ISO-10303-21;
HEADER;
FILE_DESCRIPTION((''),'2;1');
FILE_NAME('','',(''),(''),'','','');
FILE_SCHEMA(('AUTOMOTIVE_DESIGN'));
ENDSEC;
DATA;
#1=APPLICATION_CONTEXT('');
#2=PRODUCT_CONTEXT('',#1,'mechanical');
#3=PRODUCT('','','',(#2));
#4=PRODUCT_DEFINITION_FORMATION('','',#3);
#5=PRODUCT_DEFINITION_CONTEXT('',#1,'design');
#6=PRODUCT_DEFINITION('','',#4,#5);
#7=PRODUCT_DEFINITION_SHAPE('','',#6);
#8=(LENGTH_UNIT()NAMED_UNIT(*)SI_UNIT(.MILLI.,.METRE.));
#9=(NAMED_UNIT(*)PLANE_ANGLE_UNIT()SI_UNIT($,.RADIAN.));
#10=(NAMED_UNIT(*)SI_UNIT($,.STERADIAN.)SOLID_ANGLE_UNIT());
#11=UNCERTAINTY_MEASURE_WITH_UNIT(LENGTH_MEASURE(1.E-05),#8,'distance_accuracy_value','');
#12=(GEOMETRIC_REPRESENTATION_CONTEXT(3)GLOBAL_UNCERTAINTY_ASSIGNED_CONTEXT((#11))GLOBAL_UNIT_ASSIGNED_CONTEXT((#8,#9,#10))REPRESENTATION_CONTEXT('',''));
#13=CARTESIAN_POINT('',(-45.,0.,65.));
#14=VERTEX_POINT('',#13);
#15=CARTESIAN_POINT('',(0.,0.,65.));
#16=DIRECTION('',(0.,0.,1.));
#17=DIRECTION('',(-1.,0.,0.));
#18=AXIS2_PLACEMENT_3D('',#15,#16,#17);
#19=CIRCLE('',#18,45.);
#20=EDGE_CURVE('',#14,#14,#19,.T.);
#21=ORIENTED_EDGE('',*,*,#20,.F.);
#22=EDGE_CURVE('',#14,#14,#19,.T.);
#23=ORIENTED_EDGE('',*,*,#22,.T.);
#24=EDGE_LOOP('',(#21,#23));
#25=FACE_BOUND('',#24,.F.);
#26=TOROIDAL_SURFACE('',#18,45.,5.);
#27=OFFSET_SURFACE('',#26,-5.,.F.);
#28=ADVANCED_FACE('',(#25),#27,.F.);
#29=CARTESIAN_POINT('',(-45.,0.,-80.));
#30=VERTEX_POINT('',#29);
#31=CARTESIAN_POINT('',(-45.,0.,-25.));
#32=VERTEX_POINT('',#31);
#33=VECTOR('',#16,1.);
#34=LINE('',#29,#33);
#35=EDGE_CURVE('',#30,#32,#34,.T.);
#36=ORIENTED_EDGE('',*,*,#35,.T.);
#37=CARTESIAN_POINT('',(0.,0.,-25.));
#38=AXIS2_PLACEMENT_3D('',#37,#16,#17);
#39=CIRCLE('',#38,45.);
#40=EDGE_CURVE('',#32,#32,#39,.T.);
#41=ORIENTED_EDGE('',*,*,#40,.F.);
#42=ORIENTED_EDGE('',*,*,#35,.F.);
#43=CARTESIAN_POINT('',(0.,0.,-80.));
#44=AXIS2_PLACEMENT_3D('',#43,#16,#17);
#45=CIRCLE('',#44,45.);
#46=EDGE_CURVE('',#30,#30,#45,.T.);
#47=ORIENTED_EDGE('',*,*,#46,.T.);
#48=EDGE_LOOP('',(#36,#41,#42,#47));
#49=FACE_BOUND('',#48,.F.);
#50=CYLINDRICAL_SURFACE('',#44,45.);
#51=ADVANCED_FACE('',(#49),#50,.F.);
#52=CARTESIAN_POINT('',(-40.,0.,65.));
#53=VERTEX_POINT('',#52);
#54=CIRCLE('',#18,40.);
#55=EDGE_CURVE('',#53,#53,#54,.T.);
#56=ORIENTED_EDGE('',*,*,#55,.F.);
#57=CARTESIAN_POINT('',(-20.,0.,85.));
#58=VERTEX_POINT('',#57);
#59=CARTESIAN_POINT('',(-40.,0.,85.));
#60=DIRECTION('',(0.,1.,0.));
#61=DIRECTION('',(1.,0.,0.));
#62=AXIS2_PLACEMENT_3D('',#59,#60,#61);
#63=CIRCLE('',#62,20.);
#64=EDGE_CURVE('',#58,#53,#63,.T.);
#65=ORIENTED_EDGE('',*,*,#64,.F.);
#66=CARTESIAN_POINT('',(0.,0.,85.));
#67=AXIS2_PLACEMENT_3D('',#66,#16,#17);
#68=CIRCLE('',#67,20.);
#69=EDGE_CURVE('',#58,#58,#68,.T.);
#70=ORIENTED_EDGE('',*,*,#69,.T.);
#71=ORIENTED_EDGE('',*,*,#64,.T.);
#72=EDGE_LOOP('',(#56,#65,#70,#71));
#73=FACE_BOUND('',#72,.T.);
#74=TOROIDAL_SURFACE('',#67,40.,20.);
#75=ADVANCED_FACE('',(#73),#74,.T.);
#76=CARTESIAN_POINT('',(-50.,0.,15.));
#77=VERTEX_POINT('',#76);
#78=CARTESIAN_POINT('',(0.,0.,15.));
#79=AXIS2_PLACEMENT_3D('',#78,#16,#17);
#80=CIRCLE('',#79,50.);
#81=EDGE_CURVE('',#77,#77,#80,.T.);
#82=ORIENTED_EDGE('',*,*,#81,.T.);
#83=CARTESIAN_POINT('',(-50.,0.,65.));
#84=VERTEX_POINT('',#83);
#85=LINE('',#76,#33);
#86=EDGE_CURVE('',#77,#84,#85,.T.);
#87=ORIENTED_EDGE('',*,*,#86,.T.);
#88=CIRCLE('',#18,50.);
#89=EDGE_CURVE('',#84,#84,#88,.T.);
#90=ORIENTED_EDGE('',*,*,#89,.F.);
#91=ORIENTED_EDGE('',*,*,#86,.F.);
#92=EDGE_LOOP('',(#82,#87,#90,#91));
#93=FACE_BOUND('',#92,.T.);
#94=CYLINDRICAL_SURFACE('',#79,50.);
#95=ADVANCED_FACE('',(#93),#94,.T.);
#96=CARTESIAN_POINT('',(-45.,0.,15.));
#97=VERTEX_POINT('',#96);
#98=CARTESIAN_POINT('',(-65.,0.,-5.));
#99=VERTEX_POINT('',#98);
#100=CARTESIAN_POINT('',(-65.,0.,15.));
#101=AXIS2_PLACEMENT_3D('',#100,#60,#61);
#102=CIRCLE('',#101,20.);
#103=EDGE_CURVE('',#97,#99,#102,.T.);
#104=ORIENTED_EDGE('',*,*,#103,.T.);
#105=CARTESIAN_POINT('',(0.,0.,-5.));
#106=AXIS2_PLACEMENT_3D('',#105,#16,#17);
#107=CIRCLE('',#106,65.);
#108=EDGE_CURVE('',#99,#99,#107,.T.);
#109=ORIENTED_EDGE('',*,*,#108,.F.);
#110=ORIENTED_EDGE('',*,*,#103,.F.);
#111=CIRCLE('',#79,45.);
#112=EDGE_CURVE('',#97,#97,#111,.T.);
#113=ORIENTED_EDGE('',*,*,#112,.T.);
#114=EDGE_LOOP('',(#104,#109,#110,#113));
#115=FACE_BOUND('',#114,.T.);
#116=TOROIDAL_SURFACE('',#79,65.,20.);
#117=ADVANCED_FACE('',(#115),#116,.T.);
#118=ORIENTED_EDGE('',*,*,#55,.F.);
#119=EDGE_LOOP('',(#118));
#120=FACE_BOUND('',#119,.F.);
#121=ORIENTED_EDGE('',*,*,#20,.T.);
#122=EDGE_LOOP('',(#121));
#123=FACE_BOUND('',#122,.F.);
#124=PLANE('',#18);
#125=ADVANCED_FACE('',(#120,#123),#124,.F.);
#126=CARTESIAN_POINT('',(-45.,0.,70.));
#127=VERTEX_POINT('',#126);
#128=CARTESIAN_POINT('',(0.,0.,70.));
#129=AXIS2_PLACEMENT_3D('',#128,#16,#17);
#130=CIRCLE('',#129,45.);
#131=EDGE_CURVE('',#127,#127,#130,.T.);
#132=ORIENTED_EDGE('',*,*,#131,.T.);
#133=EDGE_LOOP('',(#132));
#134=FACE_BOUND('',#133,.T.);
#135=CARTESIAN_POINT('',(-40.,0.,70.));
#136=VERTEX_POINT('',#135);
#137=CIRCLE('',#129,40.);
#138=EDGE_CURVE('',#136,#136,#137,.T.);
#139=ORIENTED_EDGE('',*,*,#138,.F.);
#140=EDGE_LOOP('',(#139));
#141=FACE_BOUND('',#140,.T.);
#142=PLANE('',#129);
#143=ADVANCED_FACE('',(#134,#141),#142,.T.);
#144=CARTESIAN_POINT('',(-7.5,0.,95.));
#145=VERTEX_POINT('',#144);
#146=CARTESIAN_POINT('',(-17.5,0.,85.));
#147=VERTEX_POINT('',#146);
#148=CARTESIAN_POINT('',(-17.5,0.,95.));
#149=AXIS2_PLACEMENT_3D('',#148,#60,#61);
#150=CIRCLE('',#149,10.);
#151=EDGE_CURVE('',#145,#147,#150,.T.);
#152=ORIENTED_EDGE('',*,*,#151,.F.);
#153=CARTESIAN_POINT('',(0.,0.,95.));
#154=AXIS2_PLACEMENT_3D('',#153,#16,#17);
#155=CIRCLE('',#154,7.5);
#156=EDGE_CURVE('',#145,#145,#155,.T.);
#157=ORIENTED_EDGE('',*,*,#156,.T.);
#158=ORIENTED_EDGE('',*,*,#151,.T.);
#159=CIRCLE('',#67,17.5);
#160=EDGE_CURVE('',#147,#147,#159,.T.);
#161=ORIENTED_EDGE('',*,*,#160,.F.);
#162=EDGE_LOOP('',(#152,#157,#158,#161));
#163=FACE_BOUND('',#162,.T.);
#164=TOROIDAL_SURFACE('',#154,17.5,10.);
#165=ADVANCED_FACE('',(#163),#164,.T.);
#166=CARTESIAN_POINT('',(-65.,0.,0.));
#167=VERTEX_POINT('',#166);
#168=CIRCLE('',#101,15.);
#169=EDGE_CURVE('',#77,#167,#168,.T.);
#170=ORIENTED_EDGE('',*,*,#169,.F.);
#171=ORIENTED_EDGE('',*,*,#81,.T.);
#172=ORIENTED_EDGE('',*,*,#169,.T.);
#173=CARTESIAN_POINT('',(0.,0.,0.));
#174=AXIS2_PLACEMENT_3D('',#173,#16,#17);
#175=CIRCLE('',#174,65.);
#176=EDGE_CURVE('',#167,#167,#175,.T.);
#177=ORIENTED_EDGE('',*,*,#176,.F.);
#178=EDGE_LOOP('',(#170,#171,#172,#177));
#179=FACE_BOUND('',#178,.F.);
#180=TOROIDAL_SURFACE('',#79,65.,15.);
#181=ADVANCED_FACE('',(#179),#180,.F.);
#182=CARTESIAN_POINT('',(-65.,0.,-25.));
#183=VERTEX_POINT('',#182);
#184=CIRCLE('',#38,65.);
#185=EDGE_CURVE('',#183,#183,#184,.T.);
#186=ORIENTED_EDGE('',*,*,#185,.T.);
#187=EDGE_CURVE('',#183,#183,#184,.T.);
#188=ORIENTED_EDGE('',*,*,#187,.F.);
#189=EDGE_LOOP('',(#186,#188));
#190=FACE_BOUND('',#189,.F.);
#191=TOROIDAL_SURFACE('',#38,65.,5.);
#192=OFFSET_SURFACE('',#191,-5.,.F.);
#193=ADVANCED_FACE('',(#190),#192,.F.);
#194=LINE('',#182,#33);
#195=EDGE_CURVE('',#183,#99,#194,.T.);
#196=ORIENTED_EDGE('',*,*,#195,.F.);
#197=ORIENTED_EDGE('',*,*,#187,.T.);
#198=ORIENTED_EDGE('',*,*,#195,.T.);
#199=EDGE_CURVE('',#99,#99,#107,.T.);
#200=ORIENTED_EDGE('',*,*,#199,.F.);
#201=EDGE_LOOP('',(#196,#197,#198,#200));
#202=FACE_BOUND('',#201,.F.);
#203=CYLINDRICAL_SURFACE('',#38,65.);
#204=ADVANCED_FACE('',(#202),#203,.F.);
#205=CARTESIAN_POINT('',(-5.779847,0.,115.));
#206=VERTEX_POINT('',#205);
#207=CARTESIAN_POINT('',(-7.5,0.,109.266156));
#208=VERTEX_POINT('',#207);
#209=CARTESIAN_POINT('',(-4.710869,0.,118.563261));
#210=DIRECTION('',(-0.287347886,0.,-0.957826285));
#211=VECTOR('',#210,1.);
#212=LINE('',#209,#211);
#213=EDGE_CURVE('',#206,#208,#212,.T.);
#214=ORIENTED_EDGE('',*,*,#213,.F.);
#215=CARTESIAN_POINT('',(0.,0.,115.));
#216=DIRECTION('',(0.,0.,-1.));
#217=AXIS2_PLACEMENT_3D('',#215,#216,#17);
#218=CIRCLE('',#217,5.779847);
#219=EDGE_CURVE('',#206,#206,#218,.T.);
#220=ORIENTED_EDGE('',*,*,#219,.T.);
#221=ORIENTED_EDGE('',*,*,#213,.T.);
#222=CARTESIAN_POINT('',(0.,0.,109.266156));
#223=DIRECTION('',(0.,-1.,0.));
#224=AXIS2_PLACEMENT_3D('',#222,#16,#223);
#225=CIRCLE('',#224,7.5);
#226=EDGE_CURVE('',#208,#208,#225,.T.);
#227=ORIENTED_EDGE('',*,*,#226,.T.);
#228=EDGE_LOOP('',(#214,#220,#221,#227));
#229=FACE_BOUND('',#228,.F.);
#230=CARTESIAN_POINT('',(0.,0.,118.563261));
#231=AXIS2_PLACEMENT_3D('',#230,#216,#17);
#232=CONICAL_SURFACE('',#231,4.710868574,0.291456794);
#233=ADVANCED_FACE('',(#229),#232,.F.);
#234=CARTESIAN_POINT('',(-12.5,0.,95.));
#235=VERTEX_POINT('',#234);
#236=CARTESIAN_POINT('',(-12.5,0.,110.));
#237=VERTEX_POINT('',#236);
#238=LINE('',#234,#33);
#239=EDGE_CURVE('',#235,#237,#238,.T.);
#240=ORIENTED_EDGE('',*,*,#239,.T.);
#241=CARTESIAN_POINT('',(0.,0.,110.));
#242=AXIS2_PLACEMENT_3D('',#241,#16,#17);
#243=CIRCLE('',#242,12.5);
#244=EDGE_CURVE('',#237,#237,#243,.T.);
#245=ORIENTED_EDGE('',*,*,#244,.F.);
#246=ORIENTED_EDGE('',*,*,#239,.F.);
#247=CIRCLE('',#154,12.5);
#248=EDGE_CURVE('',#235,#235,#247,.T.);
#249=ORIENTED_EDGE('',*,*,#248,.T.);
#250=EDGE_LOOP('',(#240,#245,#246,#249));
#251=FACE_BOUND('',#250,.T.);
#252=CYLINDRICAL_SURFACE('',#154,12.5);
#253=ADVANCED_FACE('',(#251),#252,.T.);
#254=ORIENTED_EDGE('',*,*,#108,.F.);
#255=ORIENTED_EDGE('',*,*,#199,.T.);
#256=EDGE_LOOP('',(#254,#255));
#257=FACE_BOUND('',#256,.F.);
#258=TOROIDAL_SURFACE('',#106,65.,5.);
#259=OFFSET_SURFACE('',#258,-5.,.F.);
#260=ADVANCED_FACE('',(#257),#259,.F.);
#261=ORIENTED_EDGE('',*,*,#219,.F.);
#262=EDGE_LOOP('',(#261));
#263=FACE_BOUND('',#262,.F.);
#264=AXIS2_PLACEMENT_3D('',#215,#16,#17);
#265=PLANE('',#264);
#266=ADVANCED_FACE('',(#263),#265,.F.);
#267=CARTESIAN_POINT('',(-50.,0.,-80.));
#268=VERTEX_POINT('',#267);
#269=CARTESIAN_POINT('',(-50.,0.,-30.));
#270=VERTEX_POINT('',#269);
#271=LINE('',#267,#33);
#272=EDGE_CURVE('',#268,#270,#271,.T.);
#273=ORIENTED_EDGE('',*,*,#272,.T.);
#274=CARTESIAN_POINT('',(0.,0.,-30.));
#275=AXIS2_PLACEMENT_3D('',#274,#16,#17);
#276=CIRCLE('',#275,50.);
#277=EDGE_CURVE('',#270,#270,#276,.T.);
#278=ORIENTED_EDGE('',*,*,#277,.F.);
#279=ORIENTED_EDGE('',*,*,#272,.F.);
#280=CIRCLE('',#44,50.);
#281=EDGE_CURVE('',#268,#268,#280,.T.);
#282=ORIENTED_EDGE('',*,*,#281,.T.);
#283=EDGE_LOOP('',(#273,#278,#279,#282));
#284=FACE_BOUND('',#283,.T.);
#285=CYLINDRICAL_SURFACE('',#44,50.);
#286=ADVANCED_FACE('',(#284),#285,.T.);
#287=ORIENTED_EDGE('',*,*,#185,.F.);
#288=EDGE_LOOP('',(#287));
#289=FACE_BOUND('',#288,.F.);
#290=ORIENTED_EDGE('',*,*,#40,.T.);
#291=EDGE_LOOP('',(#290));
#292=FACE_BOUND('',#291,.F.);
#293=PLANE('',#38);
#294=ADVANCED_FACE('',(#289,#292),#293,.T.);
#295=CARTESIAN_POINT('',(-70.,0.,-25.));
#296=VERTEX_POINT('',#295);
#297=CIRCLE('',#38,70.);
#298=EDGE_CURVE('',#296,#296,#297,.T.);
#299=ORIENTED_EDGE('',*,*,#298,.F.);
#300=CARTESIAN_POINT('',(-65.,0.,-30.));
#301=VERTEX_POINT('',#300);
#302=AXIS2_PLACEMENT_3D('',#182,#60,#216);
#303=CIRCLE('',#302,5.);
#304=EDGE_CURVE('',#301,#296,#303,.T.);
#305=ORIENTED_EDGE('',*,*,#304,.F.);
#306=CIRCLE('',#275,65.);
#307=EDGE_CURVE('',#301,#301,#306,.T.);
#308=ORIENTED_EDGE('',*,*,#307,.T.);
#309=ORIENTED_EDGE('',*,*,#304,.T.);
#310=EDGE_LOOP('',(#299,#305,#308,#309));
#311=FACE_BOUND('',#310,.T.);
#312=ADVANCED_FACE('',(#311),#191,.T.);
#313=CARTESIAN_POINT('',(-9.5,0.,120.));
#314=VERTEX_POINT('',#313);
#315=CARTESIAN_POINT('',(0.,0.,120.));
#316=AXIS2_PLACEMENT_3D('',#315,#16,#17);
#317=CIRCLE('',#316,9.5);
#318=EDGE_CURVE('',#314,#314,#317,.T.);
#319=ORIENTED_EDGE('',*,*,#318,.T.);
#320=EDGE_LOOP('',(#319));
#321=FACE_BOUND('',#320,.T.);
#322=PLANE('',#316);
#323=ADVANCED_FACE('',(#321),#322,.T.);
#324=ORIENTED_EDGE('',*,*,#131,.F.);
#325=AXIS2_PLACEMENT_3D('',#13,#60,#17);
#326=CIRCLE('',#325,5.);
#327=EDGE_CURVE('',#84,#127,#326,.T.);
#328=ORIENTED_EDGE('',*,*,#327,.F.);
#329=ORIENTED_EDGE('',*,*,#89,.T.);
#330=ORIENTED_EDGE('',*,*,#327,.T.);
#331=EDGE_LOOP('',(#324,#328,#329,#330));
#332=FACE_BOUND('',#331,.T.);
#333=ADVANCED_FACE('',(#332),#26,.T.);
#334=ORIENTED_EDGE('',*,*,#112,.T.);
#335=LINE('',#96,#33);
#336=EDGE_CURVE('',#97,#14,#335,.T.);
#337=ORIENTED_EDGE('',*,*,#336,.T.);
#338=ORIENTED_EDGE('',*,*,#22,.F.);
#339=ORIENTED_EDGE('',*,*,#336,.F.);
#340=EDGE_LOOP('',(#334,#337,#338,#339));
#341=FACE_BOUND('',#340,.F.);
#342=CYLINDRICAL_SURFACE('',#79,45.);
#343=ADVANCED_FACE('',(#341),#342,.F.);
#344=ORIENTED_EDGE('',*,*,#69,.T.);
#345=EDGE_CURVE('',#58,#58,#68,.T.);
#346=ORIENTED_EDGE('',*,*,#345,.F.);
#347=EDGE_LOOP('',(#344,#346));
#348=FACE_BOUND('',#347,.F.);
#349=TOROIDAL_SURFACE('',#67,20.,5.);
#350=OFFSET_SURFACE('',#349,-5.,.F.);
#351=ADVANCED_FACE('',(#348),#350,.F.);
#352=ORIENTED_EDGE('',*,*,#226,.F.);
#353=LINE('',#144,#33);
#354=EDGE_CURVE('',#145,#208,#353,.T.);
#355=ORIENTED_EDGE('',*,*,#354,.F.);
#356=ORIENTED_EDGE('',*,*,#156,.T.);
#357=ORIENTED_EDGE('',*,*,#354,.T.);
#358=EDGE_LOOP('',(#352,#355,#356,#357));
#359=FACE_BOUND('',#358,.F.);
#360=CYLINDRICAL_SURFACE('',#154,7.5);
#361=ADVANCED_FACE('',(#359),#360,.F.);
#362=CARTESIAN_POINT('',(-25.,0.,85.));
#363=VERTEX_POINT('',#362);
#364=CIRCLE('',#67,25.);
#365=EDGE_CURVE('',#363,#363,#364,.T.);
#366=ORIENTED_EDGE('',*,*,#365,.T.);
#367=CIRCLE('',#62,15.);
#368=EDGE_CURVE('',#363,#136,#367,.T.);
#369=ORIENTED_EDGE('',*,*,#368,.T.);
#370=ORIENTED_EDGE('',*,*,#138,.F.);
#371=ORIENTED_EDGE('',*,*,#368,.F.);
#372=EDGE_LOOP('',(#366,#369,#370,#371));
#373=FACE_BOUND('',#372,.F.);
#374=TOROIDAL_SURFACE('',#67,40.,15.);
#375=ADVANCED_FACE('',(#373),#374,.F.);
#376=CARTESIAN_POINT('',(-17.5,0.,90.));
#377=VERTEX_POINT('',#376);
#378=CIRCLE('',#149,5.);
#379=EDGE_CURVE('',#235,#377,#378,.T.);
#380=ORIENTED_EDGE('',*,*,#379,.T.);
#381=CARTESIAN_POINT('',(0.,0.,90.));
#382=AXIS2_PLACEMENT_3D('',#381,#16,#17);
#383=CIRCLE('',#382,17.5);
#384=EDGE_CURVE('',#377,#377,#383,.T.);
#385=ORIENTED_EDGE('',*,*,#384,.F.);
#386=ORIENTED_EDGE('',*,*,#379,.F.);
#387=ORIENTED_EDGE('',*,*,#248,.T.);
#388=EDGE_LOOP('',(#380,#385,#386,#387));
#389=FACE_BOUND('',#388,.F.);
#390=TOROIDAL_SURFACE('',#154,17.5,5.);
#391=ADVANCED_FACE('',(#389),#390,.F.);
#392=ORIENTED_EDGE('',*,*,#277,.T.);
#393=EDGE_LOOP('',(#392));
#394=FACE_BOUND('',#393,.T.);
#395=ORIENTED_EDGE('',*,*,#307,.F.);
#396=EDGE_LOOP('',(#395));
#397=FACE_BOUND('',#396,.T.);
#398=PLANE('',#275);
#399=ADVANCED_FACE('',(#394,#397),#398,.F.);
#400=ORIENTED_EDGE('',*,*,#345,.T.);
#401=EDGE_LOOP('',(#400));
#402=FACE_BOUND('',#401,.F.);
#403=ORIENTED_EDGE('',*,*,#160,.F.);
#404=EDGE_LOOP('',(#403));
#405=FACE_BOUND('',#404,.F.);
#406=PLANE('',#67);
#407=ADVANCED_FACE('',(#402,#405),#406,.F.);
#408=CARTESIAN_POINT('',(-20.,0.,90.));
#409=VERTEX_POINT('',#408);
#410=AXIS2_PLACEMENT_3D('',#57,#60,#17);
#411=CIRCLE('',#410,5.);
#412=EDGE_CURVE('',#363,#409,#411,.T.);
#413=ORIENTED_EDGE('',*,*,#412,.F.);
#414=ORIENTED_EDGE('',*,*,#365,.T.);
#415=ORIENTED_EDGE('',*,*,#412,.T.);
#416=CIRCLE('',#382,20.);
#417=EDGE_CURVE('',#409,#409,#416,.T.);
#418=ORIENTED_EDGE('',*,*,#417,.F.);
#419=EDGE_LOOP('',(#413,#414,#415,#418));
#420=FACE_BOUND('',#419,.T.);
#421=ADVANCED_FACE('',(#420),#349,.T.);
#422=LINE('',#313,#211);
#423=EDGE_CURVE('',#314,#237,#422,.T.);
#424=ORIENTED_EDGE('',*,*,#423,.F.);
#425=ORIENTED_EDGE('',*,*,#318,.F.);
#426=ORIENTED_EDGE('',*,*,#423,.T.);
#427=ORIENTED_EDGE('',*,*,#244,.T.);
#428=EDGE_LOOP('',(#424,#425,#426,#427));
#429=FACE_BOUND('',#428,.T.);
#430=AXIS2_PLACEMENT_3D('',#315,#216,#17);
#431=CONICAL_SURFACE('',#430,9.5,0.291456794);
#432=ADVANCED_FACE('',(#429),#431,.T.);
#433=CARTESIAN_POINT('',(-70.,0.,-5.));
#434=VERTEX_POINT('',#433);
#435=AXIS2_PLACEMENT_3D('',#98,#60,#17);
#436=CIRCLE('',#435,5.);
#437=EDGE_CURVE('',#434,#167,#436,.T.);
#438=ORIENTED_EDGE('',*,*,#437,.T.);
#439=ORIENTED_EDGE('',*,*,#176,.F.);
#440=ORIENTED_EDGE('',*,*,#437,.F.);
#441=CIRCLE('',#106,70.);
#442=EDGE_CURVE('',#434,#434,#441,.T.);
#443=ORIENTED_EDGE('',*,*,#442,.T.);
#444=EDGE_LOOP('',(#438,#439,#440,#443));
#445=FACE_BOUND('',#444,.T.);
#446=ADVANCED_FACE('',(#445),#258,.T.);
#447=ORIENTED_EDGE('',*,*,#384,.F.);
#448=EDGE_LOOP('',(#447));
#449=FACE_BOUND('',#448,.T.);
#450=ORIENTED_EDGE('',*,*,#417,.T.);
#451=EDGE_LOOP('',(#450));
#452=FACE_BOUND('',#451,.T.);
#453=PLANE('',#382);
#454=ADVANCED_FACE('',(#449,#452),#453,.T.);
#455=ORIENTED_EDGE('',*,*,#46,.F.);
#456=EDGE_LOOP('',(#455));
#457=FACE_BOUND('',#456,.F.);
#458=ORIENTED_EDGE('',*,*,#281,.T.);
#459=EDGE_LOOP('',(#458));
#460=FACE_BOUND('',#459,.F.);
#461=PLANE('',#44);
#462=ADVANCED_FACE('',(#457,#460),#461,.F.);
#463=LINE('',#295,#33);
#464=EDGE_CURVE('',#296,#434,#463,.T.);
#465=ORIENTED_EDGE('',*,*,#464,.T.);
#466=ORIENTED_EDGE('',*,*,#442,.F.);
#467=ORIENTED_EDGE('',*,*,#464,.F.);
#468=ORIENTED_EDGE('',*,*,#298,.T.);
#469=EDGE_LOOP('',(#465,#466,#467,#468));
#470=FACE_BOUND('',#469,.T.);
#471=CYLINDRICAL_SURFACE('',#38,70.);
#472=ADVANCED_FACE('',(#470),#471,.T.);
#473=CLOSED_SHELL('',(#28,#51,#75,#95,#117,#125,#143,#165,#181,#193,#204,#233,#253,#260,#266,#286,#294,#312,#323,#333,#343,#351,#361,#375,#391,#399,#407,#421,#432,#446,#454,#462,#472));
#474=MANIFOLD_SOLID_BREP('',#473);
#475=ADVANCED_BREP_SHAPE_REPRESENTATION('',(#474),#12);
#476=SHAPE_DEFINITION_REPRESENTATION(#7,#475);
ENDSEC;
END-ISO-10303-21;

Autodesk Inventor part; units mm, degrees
ref_plane "YZ Plane" through (0, 0, 0) normal (1, 0, 0) x (0, 1, 0)
ref_plane "XZ Plane" through (0, 0, 0) normal (0, 1, 0) x (-1, 0, 0)
ref_plane "XY Plane" through (0, 0, 0) normal (0, 0, 1) x (1, 0, 0)
sketch "Sketch1" plane through (0, 0, 0) normal (0, 1, 0) x (-1, 0, 0)
  line L0 (50, 0) -> (50, 0) construction
  line L1 (0, -120) -> (0, 160) projected
  line L2 (50, -80) -> (0, -80)
  line L3 (50, -80) -> (50, -30)
  line L4 (50, -30) -> (65, -30)
  line L5 (70, -25) -> (70, -5)
  line L6 (65, 0) -> (65, 0)
  line L7 (50, 15) -> (50, 65)
  line L8 (45, 70) -> (40, 70)
  line L9 (25, 85) -> (25, 85)
  line L10 (20, 90) -> (17.5, 90)
  line L11 (12.5, 95) -> (12.5, 110)
  line L12 (9.5, 120) -> (0, 120)
  arc A0 (25, 85) -> (40, 70) centre (40, 85) ccw
  arc A1 (25, 85) -> (20, 90) centre (20, 85) ccw
  arc A2 (12.5, 95) -> (17.5, 90) centre (17.5, 95) ccw
  line L13 (9.5, 120) -> (12.5, 110)
  arc A3 (50, 65) -> (45, 70) centre (45, 65) ccw
  arc A4 (50, 15) -> (65, 0) centre (65, 15) ccw
  arc A5 (65, -30) -> (70, -25) centre (65, -25) ccw
  arc A6 (70, -5) -> (65, 0) centre (65, -5) ccw
  point P0 (0, 0)
  point P1 (35, 0)
  point P2 (70, -30)
  point P3 (70, 0)
  point P4 (50, 70)
  point P5 (25, 70)
  point P6 (25, 90)
  point P7 (12.5, 90)
  point P8 (12.5, 120)
  dimension "d1" = 80
  dimension "d28" = 50
  dimension "d29" = 20
  dimension "d30" = 70
  dimension "d31" = 25
  dimension "d32" = 20
  dimension "d33" = 12.5
  dimension "d34" = 30
  dimension "d35" = 15
  dimension "d36" = 5
  dimension "d37" = 3
  dimension "d38" = 10
  dimension "d39" = 5
  dimension "d44" = 15
  dimension "d45" = 5
revolve "Revolution3" add sketch "Sketch1" angle 360 about axis through (0, 0, -10) along (0, 0, 1)
shell "Shell3" thickness 5 removed faces 1 at (11.7851, -15.9305, -80)
thread "Thread2" size "M100x6" class "6g" standard "ANSI Metric M Profile" length 50
properties part number "LOWER-NOZZLE" material "PC/ABS Plastic"
